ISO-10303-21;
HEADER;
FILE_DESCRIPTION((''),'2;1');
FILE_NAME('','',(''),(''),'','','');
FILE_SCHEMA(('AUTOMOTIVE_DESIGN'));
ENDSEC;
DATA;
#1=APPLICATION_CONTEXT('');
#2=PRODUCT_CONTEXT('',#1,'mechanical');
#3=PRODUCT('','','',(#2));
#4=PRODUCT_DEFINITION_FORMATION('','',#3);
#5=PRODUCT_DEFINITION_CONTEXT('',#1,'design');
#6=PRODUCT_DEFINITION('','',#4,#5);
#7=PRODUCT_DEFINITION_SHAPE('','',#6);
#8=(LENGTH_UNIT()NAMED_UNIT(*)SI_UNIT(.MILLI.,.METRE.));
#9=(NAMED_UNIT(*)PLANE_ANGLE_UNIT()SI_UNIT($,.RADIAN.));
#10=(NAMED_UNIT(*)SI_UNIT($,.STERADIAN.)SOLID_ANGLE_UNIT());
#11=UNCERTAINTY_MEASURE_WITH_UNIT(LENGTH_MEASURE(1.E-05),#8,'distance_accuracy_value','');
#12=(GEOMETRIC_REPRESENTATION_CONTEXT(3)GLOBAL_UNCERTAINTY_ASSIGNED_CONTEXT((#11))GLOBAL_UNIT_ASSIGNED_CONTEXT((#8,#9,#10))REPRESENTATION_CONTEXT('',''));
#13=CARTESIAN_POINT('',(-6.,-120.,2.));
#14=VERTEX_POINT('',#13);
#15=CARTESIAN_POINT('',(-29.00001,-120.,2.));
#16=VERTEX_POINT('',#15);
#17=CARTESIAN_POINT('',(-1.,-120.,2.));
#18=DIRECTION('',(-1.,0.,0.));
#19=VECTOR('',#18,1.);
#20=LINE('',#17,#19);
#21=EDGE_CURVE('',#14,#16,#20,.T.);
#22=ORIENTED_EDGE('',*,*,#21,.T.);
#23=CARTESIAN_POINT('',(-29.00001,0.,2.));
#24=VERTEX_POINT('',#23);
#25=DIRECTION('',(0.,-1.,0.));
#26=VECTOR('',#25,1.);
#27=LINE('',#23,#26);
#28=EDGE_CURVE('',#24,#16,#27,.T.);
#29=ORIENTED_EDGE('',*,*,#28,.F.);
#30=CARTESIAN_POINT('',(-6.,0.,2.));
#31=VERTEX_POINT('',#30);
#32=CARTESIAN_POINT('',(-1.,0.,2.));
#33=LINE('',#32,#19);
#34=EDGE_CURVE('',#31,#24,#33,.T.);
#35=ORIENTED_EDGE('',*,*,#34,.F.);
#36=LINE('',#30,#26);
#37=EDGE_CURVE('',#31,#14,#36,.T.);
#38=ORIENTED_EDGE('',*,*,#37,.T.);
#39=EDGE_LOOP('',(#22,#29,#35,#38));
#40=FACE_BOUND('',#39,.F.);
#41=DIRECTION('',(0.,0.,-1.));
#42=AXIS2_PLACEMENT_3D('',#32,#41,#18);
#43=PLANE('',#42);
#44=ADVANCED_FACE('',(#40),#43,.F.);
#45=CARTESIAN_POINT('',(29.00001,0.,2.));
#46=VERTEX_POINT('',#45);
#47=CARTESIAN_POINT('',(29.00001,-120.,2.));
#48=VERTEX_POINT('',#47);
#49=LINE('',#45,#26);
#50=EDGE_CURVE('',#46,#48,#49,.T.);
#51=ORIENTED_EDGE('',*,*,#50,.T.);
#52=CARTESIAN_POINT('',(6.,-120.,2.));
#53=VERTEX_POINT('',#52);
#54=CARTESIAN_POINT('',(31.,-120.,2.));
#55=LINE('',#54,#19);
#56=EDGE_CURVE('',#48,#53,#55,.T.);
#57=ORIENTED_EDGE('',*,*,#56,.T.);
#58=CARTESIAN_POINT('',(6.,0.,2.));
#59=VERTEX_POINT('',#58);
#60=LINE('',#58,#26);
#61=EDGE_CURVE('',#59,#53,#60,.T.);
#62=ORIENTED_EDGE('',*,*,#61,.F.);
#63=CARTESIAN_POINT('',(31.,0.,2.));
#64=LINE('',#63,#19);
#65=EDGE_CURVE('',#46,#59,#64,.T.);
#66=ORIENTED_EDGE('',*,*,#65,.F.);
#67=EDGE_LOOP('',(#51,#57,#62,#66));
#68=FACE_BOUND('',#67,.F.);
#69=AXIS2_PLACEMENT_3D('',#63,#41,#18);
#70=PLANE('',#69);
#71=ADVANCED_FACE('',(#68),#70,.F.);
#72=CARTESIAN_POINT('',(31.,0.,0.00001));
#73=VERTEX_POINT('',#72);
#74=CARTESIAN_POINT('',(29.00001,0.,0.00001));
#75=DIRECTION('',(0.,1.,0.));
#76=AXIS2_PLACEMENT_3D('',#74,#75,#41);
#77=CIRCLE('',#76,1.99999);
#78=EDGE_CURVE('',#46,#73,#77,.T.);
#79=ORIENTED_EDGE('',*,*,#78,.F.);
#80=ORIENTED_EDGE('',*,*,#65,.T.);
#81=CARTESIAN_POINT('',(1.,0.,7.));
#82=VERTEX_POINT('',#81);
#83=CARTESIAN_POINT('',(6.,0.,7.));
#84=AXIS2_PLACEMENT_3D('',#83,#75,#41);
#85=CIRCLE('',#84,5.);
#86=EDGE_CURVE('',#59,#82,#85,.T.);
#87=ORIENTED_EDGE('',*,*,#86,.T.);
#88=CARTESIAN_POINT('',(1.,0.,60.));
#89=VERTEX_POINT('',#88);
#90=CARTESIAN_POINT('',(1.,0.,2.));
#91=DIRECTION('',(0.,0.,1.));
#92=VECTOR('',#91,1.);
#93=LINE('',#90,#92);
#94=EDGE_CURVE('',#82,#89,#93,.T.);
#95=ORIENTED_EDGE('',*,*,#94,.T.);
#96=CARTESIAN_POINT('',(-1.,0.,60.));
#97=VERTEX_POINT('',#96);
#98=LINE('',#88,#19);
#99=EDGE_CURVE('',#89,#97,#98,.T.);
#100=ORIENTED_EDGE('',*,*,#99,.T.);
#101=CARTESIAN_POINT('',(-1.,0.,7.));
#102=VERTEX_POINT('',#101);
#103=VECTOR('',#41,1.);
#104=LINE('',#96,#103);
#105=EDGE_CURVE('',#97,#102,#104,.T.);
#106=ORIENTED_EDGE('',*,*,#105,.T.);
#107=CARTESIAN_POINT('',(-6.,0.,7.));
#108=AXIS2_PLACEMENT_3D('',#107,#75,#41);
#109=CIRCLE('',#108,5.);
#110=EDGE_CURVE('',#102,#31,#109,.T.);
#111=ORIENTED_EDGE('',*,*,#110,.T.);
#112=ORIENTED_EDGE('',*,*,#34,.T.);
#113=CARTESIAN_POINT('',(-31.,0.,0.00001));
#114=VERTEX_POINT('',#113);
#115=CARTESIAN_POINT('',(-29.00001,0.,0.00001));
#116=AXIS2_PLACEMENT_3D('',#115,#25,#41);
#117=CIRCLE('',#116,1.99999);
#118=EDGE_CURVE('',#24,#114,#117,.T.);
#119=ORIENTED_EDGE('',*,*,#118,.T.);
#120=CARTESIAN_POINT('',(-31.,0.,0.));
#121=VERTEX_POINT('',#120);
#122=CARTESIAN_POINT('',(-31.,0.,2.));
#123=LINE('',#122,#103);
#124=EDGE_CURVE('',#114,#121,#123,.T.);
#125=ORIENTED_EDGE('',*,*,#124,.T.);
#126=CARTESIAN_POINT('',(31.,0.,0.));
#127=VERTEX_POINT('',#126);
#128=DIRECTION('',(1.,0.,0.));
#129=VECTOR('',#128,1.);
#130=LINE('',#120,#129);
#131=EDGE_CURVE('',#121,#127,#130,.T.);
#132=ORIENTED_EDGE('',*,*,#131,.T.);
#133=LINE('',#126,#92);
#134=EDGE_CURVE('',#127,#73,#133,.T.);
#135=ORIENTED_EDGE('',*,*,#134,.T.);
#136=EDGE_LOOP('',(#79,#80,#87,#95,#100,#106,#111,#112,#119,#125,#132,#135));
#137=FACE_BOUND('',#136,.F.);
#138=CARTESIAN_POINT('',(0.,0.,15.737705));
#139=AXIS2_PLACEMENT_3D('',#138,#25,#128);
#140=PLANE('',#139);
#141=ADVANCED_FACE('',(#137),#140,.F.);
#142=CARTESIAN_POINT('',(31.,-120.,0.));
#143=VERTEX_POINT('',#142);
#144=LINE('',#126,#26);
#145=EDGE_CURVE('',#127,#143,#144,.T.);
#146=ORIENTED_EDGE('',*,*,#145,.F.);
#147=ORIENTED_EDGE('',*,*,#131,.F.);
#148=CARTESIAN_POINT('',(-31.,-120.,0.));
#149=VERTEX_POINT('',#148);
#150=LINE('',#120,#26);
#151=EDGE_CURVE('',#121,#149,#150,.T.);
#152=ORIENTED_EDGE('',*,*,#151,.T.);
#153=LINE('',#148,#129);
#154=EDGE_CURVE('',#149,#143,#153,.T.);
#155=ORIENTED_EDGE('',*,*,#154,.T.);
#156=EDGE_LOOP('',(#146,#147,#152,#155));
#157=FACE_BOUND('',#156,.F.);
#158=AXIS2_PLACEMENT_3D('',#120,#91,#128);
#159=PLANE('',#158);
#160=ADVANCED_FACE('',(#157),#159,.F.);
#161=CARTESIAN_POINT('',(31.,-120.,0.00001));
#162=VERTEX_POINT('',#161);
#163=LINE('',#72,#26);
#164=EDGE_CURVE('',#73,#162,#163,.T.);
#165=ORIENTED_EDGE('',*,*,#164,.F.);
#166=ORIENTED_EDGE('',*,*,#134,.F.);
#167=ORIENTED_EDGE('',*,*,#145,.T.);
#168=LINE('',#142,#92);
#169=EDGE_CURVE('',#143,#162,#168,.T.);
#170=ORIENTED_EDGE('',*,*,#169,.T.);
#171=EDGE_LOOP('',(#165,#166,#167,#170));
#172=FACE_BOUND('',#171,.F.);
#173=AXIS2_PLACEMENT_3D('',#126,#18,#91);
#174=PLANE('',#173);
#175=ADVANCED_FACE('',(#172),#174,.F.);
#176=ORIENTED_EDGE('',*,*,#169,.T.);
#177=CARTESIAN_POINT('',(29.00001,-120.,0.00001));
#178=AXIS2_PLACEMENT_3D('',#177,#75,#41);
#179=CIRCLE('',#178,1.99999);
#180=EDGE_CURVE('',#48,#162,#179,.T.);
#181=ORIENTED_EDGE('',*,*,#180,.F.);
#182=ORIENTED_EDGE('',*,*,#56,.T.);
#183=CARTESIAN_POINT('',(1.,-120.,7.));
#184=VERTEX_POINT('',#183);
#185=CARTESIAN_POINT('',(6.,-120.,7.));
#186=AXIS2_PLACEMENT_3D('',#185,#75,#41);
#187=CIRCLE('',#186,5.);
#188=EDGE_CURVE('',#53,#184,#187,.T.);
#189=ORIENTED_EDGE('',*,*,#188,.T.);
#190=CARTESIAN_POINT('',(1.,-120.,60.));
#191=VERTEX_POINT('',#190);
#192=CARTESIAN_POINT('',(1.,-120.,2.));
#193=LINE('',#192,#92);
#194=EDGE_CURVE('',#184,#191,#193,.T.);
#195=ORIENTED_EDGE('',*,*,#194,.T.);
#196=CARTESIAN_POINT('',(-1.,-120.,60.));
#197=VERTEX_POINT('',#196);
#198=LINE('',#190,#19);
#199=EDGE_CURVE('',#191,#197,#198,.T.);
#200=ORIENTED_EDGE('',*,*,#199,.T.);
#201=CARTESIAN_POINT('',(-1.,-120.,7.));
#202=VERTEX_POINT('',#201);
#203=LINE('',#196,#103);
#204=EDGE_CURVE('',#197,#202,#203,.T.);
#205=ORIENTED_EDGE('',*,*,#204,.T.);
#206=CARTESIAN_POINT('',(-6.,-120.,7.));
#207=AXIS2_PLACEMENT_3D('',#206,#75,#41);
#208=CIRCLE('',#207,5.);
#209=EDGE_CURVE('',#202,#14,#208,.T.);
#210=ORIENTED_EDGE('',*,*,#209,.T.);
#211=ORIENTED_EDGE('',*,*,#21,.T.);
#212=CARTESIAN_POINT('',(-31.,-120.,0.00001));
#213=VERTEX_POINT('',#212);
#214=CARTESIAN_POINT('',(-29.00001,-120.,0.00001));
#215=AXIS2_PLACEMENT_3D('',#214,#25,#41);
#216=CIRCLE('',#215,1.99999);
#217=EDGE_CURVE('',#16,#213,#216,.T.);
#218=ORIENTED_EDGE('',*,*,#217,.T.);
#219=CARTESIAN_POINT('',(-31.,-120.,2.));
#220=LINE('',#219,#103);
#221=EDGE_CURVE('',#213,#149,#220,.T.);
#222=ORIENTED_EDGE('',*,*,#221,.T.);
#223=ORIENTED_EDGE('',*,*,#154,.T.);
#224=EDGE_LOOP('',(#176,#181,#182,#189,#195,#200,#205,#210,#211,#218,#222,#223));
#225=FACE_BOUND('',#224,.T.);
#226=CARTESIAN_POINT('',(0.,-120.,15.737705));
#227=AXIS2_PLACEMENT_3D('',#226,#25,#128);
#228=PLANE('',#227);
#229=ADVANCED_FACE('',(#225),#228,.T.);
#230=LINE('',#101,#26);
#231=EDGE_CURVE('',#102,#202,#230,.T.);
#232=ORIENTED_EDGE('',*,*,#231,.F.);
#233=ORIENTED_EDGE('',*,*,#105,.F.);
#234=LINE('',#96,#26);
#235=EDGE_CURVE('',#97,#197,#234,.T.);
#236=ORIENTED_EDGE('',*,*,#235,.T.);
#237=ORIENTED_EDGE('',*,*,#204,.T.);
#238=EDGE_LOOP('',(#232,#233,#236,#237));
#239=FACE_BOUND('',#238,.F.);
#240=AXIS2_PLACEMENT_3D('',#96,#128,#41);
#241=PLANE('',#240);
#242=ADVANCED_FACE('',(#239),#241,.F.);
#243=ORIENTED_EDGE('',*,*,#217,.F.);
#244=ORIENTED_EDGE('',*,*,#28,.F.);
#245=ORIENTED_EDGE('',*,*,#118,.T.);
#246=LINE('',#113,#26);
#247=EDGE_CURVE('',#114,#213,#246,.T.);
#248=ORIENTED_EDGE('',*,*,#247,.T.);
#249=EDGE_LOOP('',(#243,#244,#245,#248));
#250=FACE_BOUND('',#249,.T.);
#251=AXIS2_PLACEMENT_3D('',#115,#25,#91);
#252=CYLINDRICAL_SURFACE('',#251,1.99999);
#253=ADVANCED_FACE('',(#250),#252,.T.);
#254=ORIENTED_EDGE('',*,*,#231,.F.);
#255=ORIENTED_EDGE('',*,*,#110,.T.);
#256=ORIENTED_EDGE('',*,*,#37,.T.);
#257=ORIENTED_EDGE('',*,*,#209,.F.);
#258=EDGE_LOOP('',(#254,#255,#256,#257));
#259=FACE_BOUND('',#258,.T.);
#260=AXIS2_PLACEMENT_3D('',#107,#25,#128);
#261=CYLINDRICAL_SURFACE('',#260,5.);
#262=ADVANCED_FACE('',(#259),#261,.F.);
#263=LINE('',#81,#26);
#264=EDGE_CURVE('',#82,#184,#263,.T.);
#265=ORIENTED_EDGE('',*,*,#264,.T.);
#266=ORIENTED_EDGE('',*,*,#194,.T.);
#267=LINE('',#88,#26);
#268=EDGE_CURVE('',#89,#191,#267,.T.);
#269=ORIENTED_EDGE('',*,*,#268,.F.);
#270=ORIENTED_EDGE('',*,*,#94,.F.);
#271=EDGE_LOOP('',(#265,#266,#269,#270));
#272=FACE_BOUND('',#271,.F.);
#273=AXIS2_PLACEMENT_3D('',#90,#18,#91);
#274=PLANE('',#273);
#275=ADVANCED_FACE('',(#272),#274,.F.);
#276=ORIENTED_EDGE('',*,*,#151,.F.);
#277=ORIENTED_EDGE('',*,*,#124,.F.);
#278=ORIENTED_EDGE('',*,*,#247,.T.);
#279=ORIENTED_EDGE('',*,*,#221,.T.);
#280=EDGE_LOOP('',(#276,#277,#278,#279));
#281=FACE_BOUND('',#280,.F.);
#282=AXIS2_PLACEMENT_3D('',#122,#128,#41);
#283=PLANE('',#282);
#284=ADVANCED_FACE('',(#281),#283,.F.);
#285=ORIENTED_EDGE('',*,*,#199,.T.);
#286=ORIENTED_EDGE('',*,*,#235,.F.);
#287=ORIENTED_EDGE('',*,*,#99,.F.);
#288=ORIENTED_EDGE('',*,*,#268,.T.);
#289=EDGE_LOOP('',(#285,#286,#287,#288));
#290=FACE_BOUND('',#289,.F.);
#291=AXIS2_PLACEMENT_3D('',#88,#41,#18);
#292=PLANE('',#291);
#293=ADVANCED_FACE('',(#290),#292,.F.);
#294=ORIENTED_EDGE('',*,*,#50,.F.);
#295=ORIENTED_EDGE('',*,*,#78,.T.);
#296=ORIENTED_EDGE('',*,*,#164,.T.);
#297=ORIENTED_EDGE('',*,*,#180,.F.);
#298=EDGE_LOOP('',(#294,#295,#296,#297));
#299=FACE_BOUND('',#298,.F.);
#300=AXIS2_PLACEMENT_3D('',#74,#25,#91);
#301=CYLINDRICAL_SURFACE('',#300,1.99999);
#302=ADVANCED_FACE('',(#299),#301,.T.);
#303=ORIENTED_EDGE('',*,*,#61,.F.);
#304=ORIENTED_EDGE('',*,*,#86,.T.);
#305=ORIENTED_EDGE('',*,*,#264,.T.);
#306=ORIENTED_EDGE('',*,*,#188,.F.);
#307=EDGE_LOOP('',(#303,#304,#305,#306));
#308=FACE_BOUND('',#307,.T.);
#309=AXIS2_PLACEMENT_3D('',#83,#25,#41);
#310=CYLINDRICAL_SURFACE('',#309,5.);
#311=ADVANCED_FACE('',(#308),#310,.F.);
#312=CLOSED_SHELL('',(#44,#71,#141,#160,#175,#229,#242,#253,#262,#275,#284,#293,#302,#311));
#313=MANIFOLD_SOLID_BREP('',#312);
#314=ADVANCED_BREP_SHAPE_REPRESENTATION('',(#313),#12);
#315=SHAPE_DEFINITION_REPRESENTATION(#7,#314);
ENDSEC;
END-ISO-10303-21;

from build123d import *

# Parameters (mm, degrees)
F1_DEPTH = 120
F2_R     = 5
F3_R     = 1.99999


# Not quite as in the source:
# - a fillet or chamfer is up to 0.001 mm smaller than in the source, because OpenCascade refuses the exact size


with BuildPart() as f1:
    # F0 (on Front) → F1 (new body)
    with BuildSketch(Plane.XZ):
        Polygon((1, 60), (0, 60), (-1, 60), (-1, 2), (-31, 2), (-31, 0), (0, 0), (31, 0), (31, 2), (1, 2), align=None)
    extrude(amount=F1_DEPTH)

    # F2
    f2_edges = [f1.edges().sort_by_distance(p)[0] for p in [
        (-1, -60, 2),
        (1, -60, 2),
    ]]
    fillet(f2_edges, radius=F2_R)

    # F3 (radius 2 in the source; OpenCascade refuses exactly that, so slightly less here)
    f3_edges = [f1.edges().sort_by_distance(p)[0] for p in [
        (31, -60, 2),
        (-31, -60, 2),
    ]]
    fillet(f3_edges, radius=F3_R)


solid = f1.part
